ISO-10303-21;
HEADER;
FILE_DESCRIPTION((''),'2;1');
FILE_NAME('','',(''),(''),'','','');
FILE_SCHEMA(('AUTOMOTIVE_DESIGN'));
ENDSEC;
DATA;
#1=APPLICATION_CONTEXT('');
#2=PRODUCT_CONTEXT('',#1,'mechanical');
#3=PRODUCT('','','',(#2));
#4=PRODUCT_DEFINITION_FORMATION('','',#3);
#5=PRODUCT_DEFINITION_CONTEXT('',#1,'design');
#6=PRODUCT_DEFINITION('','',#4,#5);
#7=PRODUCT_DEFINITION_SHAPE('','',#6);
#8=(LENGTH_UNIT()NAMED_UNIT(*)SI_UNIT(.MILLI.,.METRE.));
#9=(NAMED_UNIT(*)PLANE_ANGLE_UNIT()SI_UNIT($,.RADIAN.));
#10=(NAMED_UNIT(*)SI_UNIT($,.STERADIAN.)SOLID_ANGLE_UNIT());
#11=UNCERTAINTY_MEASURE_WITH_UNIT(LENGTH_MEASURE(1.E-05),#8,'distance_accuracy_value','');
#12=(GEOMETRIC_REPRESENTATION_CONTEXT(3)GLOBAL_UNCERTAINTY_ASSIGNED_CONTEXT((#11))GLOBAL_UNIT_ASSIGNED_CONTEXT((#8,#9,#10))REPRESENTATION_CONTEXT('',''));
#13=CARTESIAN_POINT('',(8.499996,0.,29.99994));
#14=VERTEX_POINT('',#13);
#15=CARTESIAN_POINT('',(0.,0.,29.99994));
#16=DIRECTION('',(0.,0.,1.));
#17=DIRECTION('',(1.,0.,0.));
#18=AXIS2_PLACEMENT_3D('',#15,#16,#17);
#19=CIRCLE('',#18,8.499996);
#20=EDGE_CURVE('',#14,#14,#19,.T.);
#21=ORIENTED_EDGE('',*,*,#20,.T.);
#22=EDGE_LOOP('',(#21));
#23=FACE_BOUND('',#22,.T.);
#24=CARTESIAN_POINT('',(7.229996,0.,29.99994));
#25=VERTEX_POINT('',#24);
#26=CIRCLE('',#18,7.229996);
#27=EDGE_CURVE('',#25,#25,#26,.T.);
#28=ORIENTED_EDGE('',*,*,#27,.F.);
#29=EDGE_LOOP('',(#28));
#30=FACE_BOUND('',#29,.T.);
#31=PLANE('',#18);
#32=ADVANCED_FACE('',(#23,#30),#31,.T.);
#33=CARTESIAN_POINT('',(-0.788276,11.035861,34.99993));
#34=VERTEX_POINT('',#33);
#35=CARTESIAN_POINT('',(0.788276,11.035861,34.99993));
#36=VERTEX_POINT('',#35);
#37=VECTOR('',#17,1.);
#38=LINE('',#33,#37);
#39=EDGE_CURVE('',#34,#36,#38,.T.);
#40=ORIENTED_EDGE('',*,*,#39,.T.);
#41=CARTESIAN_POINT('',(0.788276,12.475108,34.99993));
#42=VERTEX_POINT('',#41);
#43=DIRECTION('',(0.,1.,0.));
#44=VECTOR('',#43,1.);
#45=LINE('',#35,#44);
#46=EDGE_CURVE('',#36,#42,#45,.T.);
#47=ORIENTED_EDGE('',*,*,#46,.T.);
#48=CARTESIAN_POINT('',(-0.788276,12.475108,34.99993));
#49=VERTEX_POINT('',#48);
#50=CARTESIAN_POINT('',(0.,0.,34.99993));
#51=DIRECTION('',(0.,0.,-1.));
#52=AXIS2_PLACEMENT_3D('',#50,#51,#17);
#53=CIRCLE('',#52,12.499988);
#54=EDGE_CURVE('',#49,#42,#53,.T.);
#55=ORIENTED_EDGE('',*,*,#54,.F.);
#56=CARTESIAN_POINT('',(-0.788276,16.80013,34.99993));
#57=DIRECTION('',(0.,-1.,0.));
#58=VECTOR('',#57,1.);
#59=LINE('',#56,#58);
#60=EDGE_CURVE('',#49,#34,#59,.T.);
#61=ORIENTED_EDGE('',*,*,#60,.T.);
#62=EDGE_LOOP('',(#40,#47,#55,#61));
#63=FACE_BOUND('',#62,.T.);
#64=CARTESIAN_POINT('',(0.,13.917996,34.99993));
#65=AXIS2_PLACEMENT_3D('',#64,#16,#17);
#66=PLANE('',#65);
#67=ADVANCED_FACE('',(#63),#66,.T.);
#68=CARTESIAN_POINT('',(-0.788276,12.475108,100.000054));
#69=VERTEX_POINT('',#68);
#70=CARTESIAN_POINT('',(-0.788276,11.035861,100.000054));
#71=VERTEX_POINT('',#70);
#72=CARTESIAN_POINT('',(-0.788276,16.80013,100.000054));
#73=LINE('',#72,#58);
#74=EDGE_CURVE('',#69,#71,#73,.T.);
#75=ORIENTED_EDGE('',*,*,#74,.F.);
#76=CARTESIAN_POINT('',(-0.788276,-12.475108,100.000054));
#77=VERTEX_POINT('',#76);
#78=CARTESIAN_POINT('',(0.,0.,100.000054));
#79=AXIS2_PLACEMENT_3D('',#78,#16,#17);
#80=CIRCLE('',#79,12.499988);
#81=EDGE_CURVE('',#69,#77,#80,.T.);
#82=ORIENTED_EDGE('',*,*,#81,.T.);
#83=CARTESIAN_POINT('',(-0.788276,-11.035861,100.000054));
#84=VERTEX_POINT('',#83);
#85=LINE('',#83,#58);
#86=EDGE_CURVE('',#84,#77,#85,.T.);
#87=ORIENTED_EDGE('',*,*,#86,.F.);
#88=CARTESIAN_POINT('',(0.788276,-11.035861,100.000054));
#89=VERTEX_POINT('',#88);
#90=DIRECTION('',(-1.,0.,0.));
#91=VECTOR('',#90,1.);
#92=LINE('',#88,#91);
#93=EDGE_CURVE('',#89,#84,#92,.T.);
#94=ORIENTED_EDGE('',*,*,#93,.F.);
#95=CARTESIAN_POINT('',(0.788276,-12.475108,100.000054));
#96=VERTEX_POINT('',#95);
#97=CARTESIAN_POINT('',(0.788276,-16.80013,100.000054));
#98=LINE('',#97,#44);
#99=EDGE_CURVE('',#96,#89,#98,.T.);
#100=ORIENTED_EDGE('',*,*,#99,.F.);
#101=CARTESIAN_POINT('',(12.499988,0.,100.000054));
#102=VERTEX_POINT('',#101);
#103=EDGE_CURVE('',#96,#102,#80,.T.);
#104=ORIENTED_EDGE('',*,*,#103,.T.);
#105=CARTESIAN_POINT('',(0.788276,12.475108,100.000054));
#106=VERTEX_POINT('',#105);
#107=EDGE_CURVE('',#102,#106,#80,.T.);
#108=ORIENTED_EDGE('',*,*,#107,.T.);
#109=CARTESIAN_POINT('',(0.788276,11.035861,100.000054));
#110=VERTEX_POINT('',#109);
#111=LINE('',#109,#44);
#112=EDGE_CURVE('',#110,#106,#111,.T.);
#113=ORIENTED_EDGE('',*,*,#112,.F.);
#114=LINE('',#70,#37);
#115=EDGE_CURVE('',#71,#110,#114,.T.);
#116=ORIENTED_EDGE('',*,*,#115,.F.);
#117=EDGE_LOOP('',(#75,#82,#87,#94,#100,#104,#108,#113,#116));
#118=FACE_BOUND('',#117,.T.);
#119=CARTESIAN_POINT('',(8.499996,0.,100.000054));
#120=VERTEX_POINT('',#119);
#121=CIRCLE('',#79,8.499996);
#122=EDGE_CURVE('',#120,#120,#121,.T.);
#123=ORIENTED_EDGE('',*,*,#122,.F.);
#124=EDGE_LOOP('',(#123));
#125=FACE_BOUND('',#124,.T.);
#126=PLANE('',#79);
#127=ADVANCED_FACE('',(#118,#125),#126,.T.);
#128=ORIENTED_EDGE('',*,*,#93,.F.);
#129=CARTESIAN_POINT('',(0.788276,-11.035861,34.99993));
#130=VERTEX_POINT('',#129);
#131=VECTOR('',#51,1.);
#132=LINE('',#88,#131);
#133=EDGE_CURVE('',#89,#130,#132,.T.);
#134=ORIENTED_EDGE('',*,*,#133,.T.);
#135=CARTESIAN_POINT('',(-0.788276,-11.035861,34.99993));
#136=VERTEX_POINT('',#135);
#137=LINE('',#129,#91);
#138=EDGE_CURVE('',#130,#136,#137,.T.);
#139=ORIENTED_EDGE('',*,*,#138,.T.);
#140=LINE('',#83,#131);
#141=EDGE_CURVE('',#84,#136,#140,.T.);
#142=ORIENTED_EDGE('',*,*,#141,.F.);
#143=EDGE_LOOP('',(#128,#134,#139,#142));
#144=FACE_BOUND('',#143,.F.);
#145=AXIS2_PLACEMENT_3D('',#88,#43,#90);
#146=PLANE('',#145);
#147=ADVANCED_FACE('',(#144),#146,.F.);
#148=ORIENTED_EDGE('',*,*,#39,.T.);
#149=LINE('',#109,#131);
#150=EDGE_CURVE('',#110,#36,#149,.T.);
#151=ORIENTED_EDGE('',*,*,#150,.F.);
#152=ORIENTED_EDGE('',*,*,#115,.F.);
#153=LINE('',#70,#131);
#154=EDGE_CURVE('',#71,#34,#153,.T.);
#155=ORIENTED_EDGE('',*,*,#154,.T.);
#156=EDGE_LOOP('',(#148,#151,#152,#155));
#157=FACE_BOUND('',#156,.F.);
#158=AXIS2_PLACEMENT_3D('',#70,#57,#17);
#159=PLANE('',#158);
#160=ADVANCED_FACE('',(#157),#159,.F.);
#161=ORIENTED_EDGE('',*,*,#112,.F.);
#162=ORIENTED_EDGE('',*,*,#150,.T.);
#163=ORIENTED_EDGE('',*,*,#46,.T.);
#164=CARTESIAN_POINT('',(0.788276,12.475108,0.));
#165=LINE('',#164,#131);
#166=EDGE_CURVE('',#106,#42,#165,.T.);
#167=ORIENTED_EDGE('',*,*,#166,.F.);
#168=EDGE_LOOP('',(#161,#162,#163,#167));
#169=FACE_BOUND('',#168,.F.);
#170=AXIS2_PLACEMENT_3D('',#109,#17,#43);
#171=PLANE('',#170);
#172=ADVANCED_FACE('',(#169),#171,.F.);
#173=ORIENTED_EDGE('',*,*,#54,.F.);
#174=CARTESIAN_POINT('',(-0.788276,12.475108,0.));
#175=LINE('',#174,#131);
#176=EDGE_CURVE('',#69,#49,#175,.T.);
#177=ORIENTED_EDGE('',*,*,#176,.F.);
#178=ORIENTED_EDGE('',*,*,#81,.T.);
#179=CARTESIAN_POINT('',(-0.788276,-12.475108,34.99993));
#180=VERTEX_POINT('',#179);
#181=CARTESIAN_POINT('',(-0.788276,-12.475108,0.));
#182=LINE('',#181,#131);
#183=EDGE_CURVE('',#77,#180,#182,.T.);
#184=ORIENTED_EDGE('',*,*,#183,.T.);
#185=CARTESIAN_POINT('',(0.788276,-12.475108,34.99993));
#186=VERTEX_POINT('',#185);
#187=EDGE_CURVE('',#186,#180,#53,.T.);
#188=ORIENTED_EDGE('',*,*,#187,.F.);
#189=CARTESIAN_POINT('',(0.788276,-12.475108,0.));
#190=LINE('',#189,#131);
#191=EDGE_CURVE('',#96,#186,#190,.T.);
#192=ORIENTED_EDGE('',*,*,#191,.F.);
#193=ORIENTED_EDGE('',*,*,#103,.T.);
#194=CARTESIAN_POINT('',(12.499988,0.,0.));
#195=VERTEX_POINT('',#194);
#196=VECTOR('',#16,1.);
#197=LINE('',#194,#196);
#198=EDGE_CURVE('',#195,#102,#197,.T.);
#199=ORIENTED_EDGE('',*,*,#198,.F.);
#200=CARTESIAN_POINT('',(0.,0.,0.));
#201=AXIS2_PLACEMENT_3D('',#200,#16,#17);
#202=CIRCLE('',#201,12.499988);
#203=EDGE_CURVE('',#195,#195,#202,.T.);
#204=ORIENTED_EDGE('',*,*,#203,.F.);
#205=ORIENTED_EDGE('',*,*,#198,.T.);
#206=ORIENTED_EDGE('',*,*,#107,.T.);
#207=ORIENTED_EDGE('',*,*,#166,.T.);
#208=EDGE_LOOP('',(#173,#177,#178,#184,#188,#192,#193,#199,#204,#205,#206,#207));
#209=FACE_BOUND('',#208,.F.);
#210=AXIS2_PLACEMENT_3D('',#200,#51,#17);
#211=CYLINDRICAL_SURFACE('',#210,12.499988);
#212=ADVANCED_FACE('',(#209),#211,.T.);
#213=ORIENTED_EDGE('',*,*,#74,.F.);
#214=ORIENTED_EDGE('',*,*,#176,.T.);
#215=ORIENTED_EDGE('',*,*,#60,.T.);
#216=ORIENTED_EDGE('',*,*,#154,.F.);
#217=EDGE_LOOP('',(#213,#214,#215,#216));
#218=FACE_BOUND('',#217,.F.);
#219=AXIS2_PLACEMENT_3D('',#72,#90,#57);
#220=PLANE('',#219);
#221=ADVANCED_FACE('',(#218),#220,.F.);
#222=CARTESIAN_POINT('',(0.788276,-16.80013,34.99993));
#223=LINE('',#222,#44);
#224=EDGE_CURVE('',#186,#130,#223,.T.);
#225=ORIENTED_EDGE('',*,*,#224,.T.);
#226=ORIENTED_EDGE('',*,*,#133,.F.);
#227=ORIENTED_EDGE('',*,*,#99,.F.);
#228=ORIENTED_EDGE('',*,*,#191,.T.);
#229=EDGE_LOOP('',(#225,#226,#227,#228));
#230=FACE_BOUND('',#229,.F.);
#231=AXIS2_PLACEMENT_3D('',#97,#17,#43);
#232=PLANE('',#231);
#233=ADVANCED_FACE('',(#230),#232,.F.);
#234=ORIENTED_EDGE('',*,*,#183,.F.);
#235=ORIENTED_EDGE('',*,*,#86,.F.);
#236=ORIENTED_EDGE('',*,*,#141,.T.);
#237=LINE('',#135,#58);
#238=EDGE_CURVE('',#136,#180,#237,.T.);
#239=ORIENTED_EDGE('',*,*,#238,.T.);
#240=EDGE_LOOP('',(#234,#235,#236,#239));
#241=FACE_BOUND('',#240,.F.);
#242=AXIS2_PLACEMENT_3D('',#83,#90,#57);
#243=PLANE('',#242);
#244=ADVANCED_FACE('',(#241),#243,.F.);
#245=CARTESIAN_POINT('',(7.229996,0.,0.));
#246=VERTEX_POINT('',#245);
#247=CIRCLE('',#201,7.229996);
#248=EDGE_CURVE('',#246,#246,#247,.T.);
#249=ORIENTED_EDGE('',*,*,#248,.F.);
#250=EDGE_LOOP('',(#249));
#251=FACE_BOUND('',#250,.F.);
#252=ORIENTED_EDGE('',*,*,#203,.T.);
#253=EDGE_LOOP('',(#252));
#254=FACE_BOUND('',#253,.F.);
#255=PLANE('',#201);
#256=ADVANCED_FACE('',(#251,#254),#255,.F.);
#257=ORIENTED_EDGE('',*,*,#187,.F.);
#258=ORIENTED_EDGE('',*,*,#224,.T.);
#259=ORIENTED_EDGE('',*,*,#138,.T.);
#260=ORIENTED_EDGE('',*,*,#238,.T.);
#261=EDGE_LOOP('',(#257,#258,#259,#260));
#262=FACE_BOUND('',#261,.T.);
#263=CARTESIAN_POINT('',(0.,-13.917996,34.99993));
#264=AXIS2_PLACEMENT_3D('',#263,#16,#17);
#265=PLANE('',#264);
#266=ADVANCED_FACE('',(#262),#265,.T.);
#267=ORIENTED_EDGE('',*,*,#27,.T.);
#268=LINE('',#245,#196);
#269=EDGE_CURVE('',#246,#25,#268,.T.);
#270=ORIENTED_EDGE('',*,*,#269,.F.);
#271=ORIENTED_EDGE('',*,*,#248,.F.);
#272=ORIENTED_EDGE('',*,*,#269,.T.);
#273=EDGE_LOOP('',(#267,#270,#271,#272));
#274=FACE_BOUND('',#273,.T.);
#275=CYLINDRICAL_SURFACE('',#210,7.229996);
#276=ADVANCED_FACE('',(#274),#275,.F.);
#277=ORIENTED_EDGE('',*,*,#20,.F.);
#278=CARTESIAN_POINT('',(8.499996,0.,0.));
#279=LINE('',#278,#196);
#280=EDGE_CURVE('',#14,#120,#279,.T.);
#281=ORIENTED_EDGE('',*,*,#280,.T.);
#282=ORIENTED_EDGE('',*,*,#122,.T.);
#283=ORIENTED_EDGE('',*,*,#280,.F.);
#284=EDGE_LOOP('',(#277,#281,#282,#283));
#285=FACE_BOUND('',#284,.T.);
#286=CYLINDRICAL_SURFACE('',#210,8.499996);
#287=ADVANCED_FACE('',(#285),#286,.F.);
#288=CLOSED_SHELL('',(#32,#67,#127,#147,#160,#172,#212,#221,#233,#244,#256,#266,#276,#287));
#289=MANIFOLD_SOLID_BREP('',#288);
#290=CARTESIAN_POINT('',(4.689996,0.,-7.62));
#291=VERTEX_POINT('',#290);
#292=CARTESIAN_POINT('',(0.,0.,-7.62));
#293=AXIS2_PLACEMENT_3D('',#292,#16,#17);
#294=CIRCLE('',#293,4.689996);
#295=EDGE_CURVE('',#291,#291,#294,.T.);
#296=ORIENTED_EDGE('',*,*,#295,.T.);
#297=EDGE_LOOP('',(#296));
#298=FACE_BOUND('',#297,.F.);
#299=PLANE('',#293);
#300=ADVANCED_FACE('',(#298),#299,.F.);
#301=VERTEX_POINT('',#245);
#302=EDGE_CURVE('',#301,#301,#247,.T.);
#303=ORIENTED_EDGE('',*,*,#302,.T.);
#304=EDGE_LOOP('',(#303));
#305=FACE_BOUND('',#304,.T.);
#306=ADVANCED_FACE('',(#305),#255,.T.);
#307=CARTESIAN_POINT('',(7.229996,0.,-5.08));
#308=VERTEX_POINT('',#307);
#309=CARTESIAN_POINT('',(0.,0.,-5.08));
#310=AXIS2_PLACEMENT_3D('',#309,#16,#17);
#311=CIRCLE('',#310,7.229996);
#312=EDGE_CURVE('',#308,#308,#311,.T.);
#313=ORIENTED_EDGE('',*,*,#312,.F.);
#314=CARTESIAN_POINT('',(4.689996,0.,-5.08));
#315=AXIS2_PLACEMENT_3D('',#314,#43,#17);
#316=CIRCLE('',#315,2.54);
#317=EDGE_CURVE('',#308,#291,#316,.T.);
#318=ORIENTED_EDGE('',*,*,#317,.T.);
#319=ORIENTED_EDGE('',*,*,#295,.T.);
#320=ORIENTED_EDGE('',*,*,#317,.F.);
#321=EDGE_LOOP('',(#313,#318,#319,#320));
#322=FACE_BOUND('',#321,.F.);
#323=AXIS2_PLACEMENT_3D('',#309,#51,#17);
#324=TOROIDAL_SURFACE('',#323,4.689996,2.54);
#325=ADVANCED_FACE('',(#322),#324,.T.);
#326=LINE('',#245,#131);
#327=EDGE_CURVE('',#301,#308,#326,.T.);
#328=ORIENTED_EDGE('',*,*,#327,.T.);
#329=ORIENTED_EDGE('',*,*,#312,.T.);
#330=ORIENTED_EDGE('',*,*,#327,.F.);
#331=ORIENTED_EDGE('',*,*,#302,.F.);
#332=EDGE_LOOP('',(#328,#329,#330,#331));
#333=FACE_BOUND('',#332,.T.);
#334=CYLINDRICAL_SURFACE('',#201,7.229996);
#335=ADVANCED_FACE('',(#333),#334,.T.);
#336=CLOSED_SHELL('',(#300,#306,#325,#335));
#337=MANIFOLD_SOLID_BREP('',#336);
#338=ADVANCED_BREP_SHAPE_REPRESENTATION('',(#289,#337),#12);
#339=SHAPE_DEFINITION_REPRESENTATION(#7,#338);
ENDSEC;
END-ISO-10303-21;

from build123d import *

# Parameters (mm, degrees)
F0_R     = 12.4999877
F0_R_2   = 8.4999957
F1_DEPTH = 100.000054
F0_R_3   = 7.2299957
F2_DEPTH = 5.08
F3_DEPTH = 29.99994
F5_DEPTH = 7.62
F6_R     = 2.54
F8_DEPTH = 65.000124


# Not quite as in the source:
# - a feature names something its author has since deleted; it is built from what else it names


with BuildPart() as f1:
    # F0 (on Top) → F1 (new body)
    with BuildSketch(Plane.XY):
        Circle(F0_R)
        Circle(F0_R_2, mode=Mode.SUBTRACT)
    extrude(amount=F1_DEPTH)

    # F0 (on Top) → F2 (join)
    with BuildSketch(Plane.XY):
        Circle(F0_R_2)
        Circle(F0_R_3, mode=Mode.SUBTRACT)
    extrude(amount=F2_DEPTH)

    # F0 (on Top) → F3 (join)
    with BuildSketch(Plane.XY):
        Circle(F0_R_2)
        Circle(F0_R_3, mode=Mode.SUBTRACT)
    extrude(amount=F3_DEPTH)

    # F7 (on face) → F8 (cut)
    with BuildSketch(Plane.XY.offset(100.000054)):
        Polygon((-0.7882758509, 11.0358614475), (0, 11.0358614475), (0.7882758509, 11.0358614475), (0.7882758509, 16.8001297861), (0, 16.8001297861), (-0.7882758509, 16.8001297861), align=None)
        Polygon((0, -11.0358614475), (-0.7882758509, -11.0358614475), (-0.7882758509, -16.8001297861), (0, -16.8001297861), (0.7882758509, -16.8001297861), (0.7882758509, -11.0358614475), align=None)
    extrude(amount=-F8_DEPTH, mode=Mode.SUBTRACT)


with BuildPart() as f5:
    # F0 (on Top) → F5 (new body)
    with BuildSketch(Plane.XY):
        Circle(F0_R_3)
    extrude(amount=-F5_DEPTH)

    # F6
    f6_edges = [f5.edges().sort_by_distance(p)[0] for p in [
        (-7.229996, 0, -7.62),
    ]]
    fillet(f6_edges, radius=F6_R)


solid = Compound([f1.part, f5.part])
